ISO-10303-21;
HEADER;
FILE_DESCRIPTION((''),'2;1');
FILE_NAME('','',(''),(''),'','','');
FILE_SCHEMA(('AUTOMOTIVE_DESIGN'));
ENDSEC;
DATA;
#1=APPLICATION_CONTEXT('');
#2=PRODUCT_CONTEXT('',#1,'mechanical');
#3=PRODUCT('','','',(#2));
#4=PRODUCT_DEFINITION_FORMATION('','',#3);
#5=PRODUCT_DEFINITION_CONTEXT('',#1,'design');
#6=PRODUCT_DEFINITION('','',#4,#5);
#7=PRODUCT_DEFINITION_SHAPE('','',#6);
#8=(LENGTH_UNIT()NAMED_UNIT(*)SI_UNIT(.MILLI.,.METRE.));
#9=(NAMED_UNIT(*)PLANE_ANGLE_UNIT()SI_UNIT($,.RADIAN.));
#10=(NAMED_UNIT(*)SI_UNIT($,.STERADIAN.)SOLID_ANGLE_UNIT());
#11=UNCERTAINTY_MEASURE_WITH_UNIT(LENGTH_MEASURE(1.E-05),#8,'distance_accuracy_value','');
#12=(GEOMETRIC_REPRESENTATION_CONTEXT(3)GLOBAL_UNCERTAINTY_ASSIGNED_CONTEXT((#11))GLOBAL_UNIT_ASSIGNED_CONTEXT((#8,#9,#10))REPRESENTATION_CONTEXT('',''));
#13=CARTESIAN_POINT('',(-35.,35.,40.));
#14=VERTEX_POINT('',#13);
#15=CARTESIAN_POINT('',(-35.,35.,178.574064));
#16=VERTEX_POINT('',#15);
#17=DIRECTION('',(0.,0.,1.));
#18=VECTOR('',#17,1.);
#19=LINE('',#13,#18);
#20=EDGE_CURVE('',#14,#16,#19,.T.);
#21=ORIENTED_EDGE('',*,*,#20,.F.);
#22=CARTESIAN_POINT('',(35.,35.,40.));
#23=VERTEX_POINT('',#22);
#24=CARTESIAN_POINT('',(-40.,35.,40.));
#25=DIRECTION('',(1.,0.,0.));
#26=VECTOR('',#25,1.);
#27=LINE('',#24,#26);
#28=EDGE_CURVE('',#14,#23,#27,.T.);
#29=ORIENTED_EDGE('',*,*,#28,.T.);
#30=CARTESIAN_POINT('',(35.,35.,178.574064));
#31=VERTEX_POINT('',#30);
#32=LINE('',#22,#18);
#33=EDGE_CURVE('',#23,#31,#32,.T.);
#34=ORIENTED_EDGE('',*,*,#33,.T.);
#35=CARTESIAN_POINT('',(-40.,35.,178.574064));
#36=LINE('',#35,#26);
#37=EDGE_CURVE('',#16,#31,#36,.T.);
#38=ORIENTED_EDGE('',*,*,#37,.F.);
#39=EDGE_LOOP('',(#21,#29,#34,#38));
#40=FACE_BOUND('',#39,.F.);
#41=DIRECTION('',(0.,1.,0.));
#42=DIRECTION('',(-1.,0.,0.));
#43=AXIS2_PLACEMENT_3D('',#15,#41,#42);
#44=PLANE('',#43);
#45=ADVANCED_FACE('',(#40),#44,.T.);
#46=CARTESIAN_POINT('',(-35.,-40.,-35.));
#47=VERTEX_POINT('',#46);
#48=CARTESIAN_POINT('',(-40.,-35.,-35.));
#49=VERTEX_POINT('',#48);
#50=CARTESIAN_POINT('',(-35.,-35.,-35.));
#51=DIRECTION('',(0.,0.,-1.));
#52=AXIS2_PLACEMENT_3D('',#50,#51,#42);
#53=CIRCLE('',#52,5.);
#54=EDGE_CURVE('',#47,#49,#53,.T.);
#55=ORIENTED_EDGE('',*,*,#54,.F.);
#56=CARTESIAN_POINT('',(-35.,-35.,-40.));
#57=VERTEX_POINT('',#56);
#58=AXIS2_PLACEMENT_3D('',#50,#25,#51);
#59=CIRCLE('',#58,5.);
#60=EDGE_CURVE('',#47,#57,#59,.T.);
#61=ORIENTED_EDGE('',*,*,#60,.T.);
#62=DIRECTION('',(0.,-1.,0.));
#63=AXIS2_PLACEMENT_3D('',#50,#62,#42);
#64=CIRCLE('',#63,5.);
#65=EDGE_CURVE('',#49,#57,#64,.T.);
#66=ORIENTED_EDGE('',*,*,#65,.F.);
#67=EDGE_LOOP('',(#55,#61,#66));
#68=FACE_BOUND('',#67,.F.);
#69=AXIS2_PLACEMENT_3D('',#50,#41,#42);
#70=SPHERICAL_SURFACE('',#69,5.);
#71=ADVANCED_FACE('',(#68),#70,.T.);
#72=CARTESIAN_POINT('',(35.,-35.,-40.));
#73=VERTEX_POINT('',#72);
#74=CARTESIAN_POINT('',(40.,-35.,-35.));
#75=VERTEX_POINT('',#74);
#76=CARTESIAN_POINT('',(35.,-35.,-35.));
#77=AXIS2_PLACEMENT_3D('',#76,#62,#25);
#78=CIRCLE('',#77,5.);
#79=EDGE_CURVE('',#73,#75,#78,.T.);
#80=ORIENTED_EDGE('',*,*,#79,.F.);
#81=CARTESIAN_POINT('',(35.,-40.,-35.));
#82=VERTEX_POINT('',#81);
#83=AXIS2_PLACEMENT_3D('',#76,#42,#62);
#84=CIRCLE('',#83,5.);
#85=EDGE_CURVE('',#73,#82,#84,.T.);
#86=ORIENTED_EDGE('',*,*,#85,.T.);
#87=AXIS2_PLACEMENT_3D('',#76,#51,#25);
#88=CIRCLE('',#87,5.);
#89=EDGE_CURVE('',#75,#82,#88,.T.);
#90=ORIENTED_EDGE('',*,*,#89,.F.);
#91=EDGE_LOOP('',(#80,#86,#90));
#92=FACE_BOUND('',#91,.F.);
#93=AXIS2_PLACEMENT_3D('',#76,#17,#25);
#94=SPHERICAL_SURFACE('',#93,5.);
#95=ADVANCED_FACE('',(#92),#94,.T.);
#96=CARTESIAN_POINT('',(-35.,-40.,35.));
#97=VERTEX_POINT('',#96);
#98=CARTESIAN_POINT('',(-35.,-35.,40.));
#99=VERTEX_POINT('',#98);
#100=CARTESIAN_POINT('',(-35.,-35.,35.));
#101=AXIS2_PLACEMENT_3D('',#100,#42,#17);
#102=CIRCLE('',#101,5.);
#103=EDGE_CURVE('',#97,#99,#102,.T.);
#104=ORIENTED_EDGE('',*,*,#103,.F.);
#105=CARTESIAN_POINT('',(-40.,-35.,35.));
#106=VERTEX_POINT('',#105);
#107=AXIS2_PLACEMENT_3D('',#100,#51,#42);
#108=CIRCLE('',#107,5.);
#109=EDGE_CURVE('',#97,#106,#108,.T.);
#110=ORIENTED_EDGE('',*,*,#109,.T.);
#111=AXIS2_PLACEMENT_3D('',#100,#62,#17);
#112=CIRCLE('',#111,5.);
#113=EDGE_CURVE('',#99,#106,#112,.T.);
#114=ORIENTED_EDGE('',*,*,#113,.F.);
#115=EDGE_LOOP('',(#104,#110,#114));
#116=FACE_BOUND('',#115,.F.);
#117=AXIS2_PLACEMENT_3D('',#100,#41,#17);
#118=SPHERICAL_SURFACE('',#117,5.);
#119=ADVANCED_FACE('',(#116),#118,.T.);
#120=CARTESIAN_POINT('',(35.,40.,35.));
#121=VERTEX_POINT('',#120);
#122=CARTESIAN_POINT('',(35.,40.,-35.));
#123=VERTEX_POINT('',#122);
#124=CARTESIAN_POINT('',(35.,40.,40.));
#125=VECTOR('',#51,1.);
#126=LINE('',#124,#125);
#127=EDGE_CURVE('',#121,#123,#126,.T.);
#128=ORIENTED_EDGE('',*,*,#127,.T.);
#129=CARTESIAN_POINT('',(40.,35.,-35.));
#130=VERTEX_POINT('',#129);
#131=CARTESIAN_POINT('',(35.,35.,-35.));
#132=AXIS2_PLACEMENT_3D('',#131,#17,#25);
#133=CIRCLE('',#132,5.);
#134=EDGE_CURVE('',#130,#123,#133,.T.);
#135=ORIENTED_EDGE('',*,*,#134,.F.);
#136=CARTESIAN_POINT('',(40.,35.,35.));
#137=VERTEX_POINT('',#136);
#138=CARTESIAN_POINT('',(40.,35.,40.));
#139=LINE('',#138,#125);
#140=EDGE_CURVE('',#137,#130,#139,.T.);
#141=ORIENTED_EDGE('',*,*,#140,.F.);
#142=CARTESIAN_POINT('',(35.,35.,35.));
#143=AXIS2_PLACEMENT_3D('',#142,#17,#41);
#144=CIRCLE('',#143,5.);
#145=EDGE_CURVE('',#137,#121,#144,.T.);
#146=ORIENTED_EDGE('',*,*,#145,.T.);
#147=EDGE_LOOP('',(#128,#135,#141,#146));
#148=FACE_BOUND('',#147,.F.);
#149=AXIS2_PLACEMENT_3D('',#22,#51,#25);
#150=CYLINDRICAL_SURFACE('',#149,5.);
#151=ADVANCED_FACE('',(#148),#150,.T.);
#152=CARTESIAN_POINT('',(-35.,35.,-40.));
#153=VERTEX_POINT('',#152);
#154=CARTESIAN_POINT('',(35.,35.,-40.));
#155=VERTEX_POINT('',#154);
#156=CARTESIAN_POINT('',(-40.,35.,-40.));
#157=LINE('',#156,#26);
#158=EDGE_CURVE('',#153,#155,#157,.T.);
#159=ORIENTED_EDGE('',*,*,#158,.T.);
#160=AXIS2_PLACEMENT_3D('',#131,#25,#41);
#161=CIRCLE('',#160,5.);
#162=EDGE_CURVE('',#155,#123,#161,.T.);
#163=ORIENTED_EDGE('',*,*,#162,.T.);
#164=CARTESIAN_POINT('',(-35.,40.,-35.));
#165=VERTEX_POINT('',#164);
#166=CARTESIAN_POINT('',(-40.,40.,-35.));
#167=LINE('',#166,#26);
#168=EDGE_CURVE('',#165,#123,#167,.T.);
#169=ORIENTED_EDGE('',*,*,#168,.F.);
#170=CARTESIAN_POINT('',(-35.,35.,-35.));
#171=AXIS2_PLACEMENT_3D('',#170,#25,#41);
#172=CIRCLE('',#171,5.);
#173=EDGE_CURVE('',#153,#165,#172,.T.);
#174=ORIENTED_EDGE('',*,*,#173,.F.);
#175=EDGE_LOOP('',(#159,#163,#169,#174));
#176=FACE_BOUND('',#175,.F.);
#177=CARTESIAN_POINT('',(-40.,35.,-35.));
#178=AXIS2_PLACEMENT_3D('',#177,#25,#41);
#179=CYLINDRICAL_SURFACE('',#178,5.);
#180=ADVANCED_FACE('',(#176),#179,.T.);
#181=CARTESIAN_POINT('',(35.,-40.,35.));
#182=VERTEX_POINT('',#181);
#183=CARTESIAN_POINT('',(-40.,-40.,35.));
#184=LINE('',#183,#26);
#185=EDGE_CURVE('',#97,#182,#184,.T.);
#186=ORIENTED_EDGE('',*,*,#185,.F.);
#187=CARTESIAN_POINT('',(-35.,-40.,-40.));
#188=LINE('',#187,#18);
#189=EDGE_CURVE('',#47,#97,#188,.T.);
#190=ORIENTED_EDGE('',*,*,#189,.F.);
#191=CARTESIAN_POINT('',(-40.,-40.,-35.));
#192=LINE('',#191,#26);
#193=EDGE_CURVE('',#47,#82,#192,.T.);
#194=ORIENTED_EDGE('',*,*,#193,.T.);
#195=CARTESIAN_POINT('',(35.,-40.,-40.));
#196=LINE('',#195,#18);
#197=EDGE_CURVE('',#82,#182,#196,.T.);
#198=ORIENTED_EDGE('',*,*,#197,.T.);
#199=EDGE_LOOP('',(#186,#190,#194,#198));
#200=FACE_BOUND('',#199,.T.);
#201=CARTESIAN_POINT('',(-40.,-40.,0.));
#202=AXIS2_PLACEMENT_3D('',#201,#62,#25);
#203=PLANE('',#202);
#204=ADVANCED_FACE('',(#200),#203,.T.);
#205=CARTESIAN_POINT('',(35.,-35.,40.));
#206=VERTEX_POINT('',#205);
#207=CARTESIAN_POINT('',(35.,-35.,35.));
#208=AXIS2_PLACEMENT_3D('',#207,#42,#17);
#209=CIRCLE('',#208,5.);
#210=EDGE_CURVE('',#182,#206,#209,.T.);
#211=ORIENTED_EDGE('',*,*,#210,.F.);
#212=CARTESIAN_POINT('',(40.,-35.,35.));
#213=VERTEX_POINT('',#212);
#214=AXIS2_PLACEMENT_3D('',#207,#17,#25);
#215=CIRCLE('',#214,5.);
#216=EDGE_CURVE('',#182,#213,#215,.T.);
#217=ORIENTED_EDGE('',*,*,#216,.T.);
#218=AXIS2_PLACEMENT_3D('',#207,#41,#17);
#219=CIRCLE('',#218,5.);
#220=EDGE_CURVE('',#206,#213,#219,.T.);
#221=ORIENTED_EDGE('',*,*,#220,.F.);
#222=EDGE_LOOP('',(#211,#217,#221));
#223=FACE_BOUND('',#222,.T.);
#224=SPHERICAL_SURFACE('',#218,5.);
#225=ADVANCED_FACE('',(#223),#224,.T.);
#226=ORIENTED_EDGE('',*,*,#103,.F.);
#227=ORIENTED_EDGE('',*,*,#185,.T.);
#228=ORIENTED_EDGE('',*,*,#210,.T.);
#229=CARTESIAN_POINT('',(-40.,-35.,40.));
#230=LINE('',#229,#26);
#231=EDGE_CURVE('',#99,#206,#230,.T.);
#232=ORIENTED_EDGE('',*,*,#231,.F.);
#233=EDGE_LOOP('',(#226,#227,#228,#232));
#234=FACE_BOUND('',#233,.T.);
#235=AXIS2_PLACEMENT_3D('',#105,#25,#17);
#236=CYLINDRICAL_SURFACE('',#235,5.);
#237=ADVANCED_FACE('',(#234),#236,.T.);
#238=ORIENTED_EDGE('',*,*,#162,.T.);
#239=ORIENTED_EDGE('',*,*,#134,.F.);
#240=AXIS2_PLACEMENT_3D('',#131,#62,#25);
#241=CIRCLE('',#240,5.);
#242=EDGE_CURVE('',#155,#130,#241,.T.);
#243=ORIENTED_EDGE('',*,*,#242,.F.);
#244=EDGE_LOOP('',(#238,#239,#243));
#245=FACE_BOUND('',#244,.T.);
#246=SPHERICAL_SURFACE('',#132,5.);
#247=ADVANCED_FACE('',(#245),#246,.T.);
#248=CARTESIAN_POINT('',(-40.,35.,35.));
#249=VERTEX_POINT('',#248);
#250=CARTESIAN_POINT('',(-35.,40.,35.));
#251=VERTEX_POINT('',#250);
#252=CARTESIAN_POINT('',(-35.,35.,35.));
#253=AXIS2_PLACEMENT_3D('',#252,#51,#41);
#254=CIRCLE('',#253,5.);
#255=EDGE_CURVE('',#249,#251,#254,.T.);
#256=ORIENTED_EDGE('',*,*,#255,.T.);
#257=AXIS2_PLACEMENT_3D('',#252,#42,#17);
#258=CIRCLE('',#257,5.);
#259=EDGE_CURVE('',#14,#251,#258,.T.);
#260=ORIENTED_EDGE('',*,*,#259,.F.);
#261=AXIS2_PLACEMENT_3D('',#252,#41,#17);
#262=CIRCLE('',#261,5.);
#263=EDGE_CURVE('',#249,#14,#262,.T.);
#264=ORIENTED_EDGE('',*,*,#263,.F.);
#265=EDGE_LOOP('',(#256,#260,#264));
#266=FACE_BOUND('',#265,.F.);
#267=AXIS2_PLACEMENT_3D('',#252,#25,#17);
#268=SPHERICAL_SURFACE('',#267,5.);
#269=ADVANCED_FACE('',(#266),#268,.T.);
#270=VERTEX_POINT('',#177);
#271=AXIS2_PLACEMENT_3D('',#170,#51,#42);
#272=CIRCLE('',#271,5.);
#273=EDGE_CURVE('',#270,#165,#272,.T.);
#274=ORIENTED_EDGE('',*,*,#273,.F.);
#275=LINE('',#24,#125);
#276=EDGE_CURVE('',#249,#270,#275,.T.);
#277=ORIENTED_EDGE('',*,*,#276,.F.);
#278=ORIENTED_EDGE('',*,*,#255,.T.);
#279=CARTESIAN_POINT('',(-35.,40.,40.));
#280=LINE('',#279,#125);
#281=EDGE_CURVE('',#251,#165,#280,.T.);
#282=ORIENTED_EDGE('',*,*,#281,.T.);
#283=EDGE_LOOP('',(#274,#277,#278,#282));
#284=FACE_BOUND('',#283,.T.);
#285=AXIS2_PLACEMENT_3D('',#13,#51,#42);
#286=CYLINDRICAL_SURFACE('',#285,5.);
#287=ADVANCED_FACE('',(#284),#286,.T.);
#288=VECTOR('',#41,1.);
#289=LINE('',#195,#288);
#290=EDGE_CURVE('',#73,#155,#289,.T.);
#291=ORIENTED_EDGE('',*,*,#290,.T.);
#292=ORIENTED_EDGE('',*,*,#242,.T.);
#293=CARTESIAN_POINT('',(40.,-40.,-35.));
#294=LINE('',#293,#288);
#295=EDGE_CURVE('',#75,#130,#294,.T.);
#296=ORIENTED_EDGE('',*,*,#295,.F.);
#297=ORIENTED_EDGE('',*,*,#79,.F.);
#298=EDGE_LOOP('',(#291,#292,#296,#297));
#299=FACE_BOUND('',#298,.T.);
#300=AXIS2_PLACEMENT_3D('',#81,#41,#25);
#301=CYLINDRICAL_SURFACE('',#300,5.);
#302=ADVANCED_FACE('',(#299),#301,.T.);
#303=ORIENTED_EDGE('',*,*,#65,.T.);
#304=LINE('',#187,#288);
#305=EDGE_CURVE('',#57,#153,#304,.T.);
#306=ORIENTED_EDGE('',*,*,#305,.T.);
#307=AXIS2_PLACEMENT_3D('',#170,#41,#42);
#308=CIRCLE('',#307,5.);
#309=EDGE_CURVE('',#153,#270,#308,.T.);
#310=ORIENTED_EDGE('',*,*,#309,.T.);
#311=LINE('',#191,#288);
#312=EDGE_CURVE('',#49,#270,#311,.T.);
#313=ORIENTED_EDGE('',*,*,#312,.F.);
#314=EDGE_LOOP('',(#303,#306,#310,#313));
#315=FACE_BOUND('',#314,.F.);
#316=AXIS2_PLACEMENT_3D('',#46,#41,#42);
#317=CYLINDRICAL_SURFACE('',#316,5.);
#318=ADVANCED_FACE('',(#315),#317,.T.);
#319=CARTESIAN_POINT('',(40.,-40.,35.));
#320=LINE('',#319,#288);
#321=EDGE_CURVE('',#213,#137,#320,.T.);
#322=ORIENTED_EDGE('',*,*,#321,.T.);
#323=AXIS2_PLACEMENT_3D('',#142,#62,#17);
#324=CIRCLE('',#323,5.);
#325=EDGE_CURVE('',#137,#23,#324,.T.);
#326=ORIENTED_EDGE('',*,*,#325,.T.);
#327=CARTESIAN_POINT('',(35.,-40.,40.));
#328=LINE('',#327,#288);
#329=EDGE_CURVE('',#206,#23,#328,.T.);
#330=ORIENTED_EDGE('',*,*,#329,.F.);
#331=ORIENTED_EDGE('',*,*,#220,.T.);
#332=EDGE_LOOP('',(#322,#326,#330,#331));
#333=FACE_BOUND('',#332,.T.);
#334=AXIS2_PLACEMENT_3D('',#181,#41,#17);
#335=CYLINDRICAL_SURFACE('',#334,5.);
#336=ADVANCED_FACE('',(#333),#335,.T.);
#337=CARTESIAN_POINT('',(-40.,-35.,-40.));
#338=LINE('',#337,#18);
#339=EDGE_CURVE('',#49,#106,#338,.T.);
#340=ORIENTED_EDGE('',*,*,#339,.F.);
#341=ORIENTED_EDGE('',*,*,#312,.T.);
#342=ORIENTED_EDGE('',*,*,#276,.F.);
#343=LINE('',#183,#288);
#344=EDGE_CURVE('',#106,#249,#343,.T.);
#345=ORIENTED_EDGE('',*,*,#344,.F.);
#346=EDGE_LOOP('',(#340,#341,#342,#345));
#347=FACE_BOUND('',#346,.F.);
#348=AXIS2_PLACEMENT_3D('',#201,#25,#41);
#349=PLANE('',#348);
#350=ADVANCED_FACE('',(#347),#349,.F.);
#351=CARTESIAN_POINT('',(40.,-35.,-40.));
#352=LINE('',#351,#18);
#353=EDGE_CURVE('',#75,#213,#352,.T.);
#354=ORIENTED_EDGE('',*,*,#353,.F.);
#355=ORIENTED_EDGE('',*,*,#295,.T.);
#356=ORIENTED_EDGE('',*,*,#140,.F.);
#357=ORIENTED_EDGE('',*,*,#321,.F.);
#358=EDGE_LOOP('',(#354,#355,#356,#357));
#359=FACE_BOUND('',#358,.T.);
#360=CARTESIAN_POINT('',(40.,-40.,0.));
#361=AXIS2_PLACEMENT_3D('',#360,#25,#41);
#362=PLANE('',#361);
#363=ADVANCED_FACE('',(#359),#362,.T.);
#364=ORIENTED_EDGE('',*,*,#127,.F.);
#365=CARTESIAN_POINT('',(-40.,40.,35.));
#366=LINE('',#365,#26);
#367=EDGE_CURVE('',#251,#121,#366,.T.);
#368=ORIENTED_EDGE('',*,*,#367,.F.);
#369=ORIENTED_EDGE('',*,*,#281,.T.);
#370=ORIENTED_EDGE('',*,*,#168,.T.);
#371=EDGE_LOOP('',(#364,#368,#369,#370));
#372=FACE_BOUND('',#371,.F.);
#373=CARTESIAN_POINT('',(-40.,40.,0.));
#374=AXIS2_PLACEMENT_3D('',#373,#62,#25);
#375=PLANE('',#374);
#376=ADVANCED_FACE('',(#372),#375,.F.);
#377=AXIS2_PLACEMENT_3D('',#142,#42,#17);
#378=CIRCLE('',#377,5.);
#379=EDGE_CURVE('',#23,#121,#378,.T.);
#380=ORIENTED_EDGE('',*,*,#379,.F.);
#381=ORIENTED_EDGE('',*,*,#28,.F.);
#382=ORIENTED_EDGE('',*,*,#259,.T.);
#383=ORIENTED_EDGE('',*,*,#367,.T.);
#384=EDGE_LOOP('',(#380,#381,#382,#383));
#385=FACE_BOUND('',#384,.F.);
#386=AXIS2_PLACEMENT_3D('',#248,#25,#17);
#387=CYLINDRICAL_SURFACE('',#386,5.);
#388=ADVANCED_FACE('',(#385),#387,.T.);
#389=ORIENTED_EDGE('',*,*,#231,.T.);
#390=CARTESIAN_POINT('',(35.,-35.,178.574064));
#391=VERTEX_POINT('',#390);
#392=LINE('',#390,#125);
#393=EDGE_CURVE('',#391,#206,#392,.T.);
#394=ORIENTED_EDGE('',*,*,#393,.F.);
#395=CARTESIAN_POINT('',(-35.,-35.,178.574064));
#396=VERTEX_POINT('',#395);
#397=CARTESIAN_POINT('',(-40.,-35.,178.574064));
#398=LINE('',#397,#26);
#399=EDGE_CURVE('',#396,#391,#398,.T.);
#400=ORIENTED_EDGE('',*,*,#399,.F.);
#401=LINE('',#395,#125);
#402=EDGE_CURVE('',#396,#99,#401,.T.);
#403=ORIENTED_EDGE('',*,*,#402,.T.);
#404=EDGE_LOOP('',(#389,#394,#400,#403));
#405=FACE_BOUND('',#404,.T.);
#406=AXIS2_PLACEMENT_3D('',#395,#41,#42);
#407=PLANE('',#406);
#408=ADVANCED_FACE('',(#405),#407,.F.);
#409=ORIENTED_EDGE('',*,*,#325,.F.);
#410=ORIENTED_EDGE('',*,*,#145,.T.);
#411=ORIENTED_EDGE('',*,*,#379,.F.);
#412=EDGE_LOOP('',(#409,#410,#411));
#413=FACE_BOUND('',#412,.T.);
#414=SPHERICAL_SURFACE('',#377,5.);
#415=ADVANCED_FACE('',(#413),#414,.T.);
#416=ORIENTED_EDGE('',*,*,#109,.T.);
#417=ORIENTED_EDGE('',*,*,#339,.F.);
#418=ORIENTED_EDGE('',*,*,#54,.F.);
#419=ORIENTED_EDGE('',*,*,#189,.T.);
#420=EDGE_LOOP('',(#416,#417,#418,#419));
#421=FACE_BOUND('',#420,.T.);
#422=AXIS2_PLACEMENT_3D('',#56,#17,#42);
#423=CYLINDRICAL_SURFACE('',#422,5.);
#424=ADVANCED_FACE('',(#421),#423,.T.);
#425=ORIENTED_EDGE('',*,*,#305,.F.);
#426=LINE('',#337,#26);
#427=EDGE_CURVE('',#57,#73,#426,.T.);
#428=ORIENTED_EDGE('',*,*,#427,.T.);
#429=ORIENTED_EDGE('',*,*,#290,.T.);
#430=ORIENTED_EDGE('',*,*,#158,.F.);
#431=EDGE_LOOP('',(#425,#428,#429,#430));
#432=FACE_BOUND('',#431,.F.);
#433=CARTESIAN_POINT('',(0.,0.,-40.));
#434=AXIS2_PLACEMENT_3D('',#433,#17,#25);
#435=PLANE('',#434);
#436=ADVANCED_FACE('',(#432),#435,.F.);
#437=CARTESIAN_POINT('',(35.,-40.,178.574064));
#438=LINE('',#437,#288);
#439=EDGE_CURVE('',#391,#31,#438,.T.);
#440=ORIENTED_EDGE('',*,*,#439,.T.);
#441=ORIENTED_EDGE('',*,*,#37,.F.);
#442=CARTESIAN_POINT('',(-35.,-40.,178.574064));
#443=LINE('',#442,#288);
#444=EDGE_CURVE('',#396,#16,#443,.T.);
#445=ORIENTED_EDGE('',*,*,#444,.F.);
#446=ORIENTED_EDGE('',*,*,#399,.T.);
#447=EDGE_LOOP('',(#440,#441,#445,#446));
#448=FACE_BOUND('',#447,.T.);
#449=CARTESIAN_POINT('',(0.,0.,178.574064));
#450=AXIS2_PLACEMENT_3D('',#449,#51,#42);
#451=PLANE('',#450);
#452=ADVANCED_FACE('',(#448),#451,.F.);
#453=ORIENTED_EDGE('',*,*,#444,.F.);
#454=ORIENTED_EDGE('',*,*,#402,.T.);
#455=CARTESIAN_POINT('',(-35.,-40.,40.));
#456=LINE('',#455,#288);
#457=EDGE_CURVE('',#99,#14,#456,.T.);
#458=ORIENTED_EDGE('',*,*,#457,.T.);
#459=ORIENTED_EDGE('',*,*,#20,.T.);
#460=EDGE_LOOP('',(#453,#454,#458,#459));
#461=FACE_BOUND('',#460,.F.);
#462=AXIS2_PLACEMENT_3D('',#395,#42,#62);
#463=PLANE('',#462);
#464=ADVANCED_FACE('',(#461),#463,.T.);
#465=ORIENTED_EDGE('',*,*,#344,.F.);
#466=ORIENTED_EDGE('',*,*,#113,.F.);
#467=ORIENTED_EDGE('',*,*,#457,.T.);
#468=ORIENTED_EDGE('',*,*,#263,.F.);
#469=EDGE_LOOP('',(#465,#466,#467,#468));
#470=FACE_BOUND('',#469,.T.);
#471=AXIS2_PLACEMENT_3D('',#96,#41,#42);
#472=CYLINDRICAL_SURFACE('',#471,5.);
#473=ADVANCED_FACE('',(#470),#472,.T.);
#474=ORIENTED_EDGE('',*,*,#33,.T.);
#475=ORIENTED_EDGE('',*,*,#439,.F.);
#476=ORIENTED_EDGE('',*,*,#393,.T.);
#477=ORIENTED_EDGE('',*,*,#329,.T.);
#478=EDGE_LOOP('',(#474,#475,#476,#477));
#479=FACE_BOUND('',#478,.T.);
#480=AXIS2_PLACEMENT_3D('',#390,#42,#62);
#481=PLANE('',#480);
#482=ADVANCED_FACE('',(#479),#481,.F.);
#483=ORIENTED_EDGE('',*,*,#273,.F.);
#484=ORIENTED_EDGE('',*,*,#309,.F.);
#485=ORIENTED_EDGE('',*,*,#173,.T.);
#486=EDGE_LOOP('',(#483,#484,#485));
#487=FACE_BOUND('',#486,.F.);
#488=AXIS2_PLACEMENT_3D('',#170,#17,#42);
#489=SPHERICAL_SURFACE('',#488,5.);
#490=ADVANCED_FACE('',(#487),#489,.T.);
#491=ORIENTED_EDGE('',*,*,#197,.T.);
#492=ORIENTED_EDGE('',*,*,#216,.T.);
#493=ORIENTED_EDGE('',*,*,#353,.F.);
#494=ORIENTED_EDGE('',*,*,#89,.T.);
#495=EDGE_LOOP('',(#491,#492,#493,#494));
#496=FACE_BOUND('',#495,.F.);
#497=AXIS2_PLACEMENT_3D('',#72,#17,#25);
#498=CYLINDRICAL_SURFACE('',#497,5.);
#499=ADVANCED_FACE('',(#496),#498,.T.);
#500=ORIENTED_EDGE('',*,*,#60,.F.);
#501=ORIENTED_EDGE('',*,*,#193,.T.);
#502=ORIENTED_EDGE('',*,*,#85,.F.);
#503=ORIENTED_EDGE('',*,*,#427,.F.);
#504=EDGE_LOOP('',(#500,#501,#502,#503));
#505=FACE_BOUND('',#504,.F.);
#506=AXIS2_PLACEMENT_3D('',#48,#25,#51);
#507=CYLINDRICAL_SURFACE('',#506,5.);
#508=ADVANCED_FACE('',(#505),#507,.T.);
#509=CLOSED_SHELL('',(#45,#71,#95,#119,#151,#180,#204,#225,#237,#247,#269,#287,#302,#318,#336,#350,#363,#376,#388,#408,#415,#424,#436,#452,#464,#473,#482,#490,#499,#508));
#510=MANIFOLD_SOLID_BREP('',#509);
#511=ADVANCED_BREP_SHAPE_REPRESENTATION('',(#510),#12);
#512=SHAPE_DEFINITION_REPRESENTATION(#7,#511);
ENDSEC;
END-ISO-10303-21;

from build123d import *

# Parameters (mm, degrees)
F0_W     = 80
F0_H     = 80
F1_DEPTH = 40
F2_R     = 5
F3_DEPTH = 80.001


# Not quite as in the source:
# - a pattern or mirror of a feature is missing from the dataset's text; its kind, count and spacing are read off the source's solid


with BuildPart() as f1:
    # F0 (on Top) → F1 (new body, symmetric)
    with BuildSketch(Plane.XY):
        Rectangle(F0_W, F0_H)
    extrude(amount=F1_DEPTH, both=True)

    # F2
    f2_edges = [f1.edges().sort_by_distance(p)[0] for p in [
        (0, 40, 40),
        (-40, 0, 40),
        (40, 0, 40),
        (0, -40, 40),
        (40, 40, 0),
        (40, -40, 0),
        (40, 0, -40),
        (-40, 40, 0),
        (-40, 0, -40),
        (-40, -40, 0),
        (0, -40, -40),
        (0, 40, -40),
    ]]
    fillet(f2_edges, radius=F2_R)

    # F3 (add, through all): faces of the model
    f3_faces = [f1.faces().sort_by_distance(p)[0] for p in [
        (0, 0, -40),
        (0, 0, 40),
    ]]
    f3 = extrude(f3_faces, amount=-F3_DEPTH, dir=(0, 0, -1))

    # F3_copies: F3 across plane
    add(f3.mirror(Plane.XY.offset(69.287032)))


solid = f1.part
